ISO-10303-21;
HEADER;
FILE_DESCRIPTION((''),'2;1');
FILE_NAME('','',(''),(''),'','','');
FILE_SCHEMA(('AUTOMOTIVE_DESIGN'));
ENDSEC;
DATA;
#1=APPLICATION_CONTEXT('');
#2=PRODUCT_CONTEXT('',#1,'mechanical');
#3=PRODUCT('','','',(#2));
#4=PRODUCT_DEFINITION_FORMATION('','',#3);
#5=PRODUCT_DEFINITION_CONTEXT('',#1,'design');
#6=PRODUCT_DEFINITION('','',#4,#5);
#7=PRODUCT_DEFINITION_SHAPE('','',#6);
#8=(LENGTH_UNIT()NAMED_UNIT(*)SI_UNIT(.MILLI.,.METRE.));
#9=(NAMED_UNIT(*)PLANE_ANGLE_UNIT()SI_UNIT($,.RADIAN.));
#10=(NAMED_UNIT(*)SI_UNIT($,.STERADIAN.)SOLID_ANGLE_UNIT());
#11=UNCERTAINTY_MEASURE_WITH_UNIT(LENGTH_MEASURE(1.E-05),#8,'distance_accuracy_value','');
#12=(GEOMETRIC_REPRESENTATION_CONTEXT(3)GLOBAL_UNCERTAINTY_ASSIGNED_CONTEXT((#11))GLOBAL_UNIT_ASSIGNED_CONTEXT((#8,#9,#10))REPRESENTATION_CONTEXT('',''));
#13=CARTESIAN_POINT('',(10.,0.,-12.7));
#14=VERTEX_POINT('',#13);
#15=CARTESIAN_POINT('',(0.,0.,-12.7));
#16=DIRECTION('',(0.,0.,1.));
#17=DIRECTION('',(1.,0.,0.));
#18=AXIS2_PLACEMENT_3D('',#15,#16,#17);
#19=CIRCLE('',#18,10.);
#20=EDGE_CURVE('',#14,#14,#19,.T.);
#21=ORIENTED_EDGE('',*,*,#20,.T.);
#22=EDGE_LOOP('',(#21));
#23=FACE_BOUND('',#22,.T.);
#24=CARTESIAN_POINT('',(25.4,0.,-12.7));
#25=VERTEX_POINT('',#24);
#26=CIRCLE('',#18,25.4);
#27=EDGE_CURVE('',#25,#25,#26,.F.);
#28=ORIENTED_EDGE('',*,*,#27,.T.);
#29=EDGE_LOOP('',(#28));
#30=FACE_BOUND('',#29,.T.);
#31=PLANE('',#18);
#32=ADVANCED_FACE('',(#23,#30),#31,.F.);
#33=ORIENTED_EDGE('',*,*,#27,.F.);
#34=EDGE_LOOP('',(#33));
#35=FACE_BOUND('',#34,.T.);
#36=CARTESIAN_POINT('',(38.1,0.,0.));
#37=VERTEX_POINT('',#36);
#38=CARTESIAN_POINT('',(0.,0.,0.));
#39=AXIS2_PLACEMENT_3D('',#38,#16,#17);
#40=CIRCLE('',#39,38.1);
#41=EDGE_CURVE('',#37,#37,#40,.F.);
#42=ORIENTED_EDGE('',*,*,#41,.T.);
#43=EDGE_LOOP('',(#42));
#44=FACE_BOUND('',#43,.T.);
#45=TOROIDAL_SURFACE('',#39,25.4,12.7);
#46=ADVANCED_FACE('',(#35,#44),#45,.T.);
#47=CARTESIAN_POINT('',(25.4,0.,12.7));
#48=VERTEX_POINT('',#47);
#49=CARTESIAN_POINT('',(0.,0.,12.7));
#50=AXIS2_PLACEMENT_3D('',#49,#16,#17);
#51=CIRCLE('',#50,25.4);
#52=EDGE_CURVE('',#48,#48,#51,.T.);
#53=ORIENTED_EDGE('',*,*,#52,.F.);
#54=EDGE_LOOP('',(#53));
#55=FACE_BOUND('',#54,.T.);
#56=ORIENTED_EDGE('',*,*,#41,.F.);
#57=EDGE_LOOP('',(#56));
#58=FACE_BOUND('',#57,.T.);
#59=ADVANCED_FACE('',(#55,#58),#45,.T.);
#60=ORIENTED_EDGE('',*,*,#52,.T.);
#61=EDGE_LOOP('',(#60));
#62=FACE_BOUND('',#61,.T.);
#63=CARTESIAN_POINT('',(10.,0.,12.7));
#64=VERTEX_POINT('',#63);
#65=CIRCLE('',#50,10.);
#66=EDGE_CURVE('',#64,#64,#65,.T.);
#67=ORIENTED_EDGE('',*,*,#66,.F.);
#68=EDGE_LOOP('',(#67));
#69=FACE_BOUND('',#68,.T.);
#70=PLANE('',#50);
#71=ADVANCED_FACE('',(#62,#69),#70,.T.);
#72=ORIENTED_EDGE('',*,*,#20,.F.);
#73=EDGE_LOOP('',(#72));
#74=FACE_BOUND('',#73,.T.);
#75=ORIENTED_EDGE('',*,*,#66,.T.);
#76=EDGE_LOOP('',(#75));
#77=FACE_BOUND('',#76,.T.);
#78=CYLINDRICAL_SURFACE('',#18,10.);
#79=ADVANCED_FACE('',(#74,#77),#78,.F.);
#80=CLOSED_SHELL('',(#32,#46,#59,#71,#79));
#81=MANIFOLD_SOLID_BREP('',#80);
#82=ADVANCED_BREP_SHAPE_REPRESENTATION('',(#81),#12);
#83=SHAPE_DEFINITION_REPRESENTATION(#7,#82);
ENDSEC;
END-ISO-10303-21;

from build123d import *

# Parameters (mm, degrees)
SKETCH1_R               = 38.1
BOSS_EXTRUDE1_DEPTH     = 12.7
FILLET1_R               = 12.7
CUT_EXTRUDE1_DEPTH      = 60.56828015
CUT_EXTRUDE1_DEPTH_BACK = 60.56828015
SKETCH2_R               = 9.999999939


with BuildPart() as part:
    # Sketch1 → Boss-Extrude1 (new, symmetric)
    with BuildSketch(Plane.XY):
        Circle(SKETCH1_R)
    extrude(amount=BOSS_EXTRUDE1_DEPTH, both=True)

    # Fillet1
    fillet1_edges = [part.edges().sort_by_distance(p)[0] for p in [
        (-38.1, 0, -12.7),
        (-38.1, 0, 12.7),
    ]]
    fillet(fillet1_edges, radius=FILLET1_R - 0.0001)  # a hair under: the kernel refuses the full size

    # Sketch2 → Cut-Extrude1 (cut, two sides: drawn at the far end of the back side and taken through both)
    with BuildSketch(Plane.XY.offset(12.7).offset(-CUT_EXTRUDE1_DEPTH_BACK)):
        Circle(SKETCH2_R)
    extrude(amount=CUT_EXTRUDE1_DEPTH + CUT_EXTRUDE1_DEPTH_BACK, mode=Mode.SUBTRACT)


solid = part.part
